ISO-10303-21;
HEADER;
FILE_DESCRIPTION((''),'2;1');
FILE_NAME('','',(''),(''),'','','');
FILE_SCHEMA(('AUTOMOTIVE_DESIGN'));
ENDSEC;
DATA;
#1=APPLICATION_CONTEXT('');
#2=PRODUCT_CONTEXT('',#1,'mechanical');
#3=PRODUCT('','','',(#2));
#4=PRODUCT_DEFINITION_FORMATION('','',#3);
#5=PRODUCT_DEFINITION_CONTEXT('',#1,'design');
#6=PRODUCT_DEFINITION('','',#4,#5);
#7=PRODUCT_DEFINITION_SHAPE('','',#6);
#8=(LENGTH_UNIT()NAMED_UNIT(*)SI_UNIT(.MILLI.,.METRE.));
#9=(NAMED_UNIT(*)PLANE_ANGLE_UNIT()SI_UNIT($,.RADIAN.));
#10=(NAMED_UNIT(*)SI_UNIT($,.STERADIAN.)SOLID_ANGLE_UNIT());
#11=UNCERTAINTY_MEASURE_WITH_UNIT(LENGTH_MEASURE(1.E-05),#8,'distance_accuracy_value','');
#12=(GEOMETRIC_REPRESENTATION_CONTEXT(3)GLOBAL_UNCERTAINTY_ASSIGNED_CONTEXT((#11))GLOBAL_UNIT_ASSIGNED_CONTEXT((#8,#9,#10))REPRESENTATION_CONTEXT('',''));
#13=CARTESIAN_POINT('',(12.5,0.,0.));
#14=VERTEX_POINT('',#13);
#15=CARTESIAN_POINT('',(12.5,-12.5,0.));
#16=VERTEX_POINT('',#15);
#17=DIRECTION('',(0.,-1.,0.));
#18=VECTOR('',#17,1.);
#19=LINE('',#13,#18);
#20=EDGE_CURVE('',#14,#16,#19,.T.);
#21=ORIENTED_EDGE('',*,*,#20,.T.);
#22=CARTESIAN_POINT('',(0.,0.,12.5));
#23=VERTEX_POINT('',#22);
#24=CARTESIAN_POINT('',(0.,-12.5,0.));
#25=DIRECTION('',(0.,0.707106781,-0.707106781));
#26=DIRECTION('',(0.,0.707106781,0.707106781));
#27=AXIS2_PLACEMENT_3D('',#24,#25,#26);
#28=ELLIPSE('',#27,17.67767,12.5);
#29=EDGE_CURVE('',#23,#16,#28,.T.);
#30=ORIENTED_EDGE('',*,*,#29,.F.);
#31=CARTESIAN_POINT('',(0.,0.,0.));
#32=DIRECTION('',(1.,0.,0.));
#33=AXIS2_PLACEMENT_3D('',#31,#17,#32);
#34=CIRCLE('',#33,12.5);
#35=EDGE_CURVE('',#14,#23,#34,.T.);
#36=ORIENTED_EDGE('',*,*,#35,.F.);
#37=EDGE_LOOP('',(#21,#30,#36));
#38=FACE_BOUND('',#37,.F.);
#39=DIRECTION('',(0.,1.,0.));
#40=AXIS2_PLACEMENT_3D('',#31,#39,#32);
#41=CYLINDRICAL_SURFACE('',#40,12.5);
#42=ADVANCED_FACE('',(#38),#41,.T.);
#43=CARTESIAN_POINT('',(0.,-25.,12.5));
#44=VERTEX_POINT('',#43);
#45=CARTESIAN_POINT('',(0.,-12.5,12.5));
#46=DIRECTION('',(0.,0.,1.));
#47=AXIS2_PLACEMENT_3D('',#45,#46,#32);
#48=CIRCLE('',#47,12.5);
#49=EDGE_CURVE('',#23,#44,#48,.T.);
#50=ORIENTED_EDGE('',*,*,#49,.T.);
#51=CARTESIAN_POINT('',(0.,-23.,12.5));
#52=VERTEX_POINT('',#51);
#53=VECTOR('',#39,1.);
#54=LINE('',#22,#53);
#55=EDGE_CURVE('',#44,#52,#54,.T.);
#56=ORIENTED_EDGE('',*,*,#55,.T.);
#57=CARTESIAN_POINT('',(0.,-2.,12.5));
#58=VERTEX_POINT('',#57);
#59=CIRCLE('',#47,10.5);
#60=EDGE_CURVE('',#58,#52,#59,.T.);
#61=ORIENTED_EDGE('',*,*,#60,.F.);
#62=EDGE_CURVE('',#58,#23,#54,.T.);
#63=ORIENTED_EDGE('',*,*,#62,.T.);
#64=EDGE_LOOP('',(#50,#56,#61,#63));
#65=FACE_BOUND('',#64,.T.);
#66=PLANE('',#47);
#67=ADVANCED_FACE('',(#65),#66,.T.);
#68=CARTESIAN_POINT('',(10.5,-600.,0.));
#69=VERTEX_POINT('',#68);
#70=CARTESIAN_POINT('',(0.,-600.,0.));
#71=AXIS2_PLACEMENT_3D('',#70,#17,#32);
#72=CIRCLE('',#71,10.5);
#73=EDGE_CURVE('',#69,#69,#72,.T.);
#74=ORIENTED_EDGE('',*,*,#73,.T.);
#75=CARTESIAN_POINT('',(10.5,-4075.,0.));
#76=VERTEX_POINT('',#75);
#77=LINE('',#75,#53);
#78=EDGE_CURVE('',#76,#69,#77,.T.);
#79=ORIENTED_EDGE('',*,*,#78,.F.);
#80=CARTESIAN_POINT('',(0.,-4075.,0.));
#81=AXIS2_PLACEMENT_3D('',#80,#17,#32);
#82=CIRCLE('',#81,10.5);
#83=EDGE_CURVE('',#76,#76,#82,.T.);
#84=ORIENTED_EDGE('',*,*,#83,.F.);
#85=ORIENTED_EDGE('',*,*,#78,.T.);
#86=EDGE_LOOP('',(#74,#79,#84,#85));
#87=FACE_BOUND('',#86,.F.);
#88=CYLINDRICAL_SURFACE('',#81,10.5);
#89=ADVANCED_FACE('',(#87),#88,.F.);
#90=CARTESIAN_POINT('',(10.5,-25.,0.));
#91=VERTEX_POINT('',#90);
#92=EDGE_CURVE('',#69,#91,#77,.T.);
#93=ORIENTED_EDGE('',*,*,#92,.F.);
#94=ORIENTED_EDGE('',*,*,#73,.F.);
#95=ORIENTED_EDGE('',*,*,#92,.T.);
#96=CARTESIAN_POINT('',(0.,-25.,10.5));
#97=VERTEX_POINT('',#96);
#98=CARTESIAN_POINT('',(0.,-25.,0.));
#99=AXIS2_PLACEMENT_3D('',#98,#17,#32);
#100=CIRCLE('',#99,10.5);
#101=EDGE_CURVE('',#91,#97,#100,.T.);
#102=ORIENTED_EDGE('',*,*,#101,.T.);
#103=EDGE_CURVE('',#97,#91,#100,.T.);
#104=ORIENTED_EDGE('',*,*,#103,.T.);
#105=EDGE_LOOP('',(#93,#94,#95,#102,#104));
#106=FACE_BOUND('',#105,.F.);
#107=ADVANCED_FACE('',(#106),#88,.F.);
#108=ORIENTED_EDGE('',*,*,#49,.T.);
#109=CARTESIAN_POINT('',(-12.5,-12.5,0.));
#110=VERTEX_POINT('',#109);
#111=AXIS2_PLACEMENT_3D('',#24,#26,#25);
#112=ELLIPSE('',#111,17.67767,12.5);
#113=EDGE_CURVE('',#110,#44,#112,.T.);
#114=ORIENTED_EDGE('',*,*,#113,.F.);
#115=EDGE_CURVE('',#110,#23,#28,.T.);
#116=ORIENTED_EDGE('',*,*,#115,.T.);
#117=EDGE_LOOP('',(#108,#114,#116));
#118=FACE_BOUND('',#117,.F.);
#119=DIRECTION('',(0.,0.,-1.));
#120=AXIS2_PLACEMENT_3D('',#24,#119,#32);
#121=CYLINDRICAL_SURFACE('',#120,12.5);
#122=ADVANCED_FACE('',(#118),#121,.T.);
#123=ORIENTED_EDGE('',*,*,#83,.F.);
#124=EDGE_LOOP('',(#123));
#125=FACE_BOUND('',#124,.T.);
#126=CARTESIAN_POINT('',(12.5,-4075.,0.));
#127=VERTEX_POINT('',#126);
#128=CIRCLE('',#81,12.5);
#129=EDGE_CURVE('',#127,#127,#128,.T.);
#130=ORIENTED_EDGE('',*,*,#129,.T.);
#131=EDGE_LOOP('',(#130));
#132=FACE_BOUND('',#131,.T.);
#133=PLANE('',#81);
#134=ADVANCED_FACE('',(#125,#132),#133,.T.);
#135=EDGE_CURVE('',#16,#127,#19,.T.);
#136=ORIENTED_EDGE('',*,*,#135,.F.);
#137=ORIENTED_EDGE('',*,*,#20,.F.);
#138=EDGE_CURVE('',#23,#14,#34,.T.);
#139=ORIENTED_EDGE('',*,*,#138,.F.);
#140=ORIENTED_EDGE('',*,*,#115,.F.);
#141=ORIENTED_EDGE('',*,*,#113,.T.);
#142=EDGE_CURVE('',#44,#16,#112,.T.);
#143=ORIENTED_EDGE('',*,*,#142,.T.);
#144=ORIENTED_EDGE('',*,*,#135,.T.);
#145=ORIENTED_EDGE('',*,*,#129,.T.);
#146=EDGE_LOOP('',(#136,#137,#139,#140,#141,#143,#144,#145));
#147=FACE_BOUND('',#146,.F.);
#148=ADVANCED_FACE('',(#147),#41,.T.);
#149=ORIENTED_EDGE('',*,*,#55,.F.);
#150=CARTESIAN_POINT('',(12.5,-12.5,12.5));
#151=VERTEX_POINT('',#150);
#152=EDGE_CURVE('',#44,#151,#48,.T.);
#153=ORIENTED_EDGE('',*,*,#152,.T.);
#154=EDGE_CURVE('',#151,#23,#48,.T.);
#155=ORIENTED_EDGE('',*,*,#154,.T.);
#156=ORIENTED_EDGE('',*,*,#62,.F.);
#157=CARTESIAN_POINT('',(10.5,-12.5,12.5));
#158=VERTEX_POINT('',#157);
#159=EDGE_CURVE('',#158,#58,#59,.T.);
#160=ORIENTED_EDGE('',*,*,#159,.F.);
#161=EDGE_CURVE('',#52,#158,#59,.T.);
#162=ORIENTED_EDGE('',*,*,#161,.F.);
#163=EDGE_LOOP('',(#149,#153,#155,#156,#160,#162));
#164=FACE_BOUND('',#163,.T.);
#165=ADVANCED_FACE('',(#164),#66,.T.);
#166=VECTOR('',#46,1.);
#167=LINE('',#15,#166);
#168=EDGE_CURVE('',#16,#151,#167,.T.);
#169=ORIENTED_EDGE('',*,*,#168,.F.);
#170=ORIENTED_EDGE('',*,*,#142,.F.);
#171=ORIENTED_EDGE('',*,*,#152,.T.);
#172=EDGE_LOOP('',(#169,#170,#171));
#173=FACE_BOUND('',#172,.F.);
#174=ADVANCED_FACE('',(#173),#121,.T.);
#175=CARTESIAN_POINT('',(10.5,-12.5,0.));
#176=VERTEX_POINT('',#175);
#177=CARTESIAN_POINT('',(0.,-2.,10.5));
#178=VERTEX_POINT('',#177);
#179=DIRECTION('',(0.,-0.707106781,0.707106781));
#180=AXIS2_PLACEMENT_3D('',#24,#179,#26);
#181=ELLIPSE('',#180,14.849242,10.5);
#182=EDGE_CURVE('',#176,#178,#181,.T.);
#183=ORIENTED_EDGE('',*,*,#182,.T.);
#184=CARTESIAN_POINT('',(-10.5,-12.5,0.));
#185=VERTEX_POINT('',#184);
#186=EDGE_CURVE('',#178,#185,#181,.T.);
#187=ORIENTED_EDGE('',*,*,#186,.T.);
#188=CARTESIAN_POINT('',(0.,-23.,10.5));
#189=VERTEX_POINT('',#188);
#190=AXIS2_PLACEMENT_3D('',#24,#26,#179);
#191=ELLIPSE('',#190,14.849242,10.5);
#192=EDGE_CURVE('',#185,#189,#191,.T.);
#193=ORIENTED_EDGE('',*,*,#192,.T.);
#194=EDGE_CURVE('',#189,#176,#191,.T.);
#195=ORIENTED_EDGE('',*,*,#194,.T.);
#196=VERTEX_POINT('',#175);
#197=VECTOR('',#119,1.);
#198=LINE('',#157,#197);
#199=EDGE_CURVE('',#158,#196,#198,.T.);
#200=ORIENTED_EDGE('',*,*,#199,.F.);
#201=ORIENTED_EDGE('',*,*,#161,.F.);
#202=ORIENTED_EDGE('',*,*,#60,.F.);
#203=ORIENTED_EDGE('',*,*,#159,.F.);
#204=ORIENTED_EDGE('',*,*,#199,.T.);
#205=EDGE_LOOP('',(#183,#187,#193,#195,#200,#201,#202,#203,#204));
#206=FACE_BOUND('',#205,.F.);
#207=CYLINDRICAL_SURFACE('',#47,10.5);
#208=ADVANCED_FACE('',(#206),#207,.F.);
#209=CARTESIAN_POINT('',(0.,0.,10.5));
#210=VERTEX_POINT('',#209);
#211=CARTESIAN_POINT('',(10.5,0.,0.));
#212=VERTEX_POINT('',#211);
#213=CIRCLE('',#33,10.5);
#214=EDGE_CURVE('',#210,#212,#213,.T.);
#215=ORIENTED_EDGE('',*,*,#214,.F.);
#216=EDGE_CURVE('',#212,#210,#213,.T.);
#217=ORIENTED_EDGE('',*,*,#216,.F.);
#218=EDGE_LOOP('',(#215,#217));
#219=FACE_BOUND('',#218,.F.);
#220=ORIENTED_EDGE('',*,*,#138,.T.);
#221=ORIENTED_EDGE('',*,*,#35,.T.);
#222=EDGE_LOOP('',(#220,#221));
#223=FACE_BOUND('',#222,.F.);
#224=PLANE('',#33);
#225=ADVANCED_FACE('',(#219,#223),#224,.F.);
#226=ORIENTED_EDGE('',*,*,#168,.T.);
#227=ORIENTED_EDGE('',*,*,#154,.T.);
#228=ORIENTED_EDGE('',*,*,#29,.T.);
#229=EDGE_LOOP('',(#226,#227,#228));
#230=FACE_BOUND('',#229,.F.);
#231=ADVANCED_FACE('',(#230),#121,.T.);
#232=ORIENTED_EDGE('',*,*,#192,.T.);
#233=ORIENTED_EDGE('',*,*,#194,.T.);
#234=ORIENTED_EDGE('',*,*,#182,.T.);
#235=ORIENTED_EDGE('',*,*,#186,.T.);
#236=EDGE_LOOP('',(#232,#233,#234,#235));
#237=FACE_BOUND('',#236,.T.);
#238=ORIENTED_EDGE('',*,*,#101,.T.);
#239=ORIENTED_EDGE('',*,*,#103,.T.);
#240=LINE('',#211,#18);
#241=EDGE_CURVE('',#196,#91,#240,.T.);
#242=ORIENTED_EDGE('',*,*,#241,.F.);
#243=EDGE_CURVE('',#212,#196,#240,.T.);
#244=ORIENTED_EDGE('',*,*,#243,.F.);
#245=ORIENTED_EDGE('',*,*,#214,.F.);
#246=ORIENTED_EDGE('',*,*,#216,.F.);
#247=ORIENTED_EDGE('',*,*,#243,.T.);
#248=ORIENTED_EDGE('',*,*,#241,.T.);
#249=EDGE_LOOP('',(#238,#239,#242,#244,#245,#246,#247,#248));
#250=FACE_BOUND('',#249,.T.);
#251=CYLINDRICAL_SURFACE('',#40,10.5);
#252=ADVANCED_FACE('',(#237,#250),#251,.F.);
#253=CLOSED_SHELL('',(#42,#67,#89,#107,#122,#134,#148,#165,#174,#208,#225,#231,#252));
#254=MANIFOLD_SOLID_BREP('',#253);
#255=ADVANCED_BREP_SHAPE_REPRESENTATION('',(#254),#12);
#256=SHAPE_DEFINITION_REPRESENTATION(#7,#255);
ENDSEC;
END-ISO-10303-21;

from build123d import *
from build123d import SkipClean  # not in build123d's __all__

# Parameters (mm, degrees)
F0_R     = 12.5
F1_DEPTH = 4075
F2_R     = 10.5
F3_DEPTH = 4050
F4_R     = 12.5
F5_DEPTH = 12.5
F6_R     = 10.5
F7_DEPTH = 12.5
F8_R     = 10.5
F9_DEPTH = 600


with BuildPart() as f1:
    # F0 (on Front) → F1 (new body)
    with BuildSketch(Plane.XZ):
        Circle(F0_R)
    extrude(amount=F1_DEPTH)

    # F2 (on face) → F3 (cut)
    with BuildSketch(Plane.XZ.offset(4075)):
        Circle(F2_R)
    extrude(amount=-F3_DEPTH, mode=Mode.SUBTRACT)

    # F4 (on Top) → F5 (join)
    with BuildSketch(Plane.XY):
        with Locations((0, -12.5)):
            Circle(F4_R)
    with SkipClean():  # cleaning this boolean's faces spoils the solid; the shape is the same uncleaned
        extrude(amount=F5_DEPTH)

    # F6 (on face) → F7 (cut)
    with BuildSketch(Plane.XY.offset(12.5)):
        with Locations((0, -12.5)):
            Circle(F6_R)
    with SkipClean():  # cleaning this boolean's faces spoils the solid; the shape is the same uncleaned
        extrude(amount=-F7_DEPTH, mode=Mode.SUBTRACT)

    # F8 (on Front) → F9 (cut)
    with BuildSketch(Plane.XZ):
        Circle(F8_R)
    with SkipClean():  # cleaning this boolean's faces spoils the solid; the shape is the same uncleaned
        extrude(amount=F9_DEPTH, mode=Mode.SUBTRACT)


solid = f1.part
